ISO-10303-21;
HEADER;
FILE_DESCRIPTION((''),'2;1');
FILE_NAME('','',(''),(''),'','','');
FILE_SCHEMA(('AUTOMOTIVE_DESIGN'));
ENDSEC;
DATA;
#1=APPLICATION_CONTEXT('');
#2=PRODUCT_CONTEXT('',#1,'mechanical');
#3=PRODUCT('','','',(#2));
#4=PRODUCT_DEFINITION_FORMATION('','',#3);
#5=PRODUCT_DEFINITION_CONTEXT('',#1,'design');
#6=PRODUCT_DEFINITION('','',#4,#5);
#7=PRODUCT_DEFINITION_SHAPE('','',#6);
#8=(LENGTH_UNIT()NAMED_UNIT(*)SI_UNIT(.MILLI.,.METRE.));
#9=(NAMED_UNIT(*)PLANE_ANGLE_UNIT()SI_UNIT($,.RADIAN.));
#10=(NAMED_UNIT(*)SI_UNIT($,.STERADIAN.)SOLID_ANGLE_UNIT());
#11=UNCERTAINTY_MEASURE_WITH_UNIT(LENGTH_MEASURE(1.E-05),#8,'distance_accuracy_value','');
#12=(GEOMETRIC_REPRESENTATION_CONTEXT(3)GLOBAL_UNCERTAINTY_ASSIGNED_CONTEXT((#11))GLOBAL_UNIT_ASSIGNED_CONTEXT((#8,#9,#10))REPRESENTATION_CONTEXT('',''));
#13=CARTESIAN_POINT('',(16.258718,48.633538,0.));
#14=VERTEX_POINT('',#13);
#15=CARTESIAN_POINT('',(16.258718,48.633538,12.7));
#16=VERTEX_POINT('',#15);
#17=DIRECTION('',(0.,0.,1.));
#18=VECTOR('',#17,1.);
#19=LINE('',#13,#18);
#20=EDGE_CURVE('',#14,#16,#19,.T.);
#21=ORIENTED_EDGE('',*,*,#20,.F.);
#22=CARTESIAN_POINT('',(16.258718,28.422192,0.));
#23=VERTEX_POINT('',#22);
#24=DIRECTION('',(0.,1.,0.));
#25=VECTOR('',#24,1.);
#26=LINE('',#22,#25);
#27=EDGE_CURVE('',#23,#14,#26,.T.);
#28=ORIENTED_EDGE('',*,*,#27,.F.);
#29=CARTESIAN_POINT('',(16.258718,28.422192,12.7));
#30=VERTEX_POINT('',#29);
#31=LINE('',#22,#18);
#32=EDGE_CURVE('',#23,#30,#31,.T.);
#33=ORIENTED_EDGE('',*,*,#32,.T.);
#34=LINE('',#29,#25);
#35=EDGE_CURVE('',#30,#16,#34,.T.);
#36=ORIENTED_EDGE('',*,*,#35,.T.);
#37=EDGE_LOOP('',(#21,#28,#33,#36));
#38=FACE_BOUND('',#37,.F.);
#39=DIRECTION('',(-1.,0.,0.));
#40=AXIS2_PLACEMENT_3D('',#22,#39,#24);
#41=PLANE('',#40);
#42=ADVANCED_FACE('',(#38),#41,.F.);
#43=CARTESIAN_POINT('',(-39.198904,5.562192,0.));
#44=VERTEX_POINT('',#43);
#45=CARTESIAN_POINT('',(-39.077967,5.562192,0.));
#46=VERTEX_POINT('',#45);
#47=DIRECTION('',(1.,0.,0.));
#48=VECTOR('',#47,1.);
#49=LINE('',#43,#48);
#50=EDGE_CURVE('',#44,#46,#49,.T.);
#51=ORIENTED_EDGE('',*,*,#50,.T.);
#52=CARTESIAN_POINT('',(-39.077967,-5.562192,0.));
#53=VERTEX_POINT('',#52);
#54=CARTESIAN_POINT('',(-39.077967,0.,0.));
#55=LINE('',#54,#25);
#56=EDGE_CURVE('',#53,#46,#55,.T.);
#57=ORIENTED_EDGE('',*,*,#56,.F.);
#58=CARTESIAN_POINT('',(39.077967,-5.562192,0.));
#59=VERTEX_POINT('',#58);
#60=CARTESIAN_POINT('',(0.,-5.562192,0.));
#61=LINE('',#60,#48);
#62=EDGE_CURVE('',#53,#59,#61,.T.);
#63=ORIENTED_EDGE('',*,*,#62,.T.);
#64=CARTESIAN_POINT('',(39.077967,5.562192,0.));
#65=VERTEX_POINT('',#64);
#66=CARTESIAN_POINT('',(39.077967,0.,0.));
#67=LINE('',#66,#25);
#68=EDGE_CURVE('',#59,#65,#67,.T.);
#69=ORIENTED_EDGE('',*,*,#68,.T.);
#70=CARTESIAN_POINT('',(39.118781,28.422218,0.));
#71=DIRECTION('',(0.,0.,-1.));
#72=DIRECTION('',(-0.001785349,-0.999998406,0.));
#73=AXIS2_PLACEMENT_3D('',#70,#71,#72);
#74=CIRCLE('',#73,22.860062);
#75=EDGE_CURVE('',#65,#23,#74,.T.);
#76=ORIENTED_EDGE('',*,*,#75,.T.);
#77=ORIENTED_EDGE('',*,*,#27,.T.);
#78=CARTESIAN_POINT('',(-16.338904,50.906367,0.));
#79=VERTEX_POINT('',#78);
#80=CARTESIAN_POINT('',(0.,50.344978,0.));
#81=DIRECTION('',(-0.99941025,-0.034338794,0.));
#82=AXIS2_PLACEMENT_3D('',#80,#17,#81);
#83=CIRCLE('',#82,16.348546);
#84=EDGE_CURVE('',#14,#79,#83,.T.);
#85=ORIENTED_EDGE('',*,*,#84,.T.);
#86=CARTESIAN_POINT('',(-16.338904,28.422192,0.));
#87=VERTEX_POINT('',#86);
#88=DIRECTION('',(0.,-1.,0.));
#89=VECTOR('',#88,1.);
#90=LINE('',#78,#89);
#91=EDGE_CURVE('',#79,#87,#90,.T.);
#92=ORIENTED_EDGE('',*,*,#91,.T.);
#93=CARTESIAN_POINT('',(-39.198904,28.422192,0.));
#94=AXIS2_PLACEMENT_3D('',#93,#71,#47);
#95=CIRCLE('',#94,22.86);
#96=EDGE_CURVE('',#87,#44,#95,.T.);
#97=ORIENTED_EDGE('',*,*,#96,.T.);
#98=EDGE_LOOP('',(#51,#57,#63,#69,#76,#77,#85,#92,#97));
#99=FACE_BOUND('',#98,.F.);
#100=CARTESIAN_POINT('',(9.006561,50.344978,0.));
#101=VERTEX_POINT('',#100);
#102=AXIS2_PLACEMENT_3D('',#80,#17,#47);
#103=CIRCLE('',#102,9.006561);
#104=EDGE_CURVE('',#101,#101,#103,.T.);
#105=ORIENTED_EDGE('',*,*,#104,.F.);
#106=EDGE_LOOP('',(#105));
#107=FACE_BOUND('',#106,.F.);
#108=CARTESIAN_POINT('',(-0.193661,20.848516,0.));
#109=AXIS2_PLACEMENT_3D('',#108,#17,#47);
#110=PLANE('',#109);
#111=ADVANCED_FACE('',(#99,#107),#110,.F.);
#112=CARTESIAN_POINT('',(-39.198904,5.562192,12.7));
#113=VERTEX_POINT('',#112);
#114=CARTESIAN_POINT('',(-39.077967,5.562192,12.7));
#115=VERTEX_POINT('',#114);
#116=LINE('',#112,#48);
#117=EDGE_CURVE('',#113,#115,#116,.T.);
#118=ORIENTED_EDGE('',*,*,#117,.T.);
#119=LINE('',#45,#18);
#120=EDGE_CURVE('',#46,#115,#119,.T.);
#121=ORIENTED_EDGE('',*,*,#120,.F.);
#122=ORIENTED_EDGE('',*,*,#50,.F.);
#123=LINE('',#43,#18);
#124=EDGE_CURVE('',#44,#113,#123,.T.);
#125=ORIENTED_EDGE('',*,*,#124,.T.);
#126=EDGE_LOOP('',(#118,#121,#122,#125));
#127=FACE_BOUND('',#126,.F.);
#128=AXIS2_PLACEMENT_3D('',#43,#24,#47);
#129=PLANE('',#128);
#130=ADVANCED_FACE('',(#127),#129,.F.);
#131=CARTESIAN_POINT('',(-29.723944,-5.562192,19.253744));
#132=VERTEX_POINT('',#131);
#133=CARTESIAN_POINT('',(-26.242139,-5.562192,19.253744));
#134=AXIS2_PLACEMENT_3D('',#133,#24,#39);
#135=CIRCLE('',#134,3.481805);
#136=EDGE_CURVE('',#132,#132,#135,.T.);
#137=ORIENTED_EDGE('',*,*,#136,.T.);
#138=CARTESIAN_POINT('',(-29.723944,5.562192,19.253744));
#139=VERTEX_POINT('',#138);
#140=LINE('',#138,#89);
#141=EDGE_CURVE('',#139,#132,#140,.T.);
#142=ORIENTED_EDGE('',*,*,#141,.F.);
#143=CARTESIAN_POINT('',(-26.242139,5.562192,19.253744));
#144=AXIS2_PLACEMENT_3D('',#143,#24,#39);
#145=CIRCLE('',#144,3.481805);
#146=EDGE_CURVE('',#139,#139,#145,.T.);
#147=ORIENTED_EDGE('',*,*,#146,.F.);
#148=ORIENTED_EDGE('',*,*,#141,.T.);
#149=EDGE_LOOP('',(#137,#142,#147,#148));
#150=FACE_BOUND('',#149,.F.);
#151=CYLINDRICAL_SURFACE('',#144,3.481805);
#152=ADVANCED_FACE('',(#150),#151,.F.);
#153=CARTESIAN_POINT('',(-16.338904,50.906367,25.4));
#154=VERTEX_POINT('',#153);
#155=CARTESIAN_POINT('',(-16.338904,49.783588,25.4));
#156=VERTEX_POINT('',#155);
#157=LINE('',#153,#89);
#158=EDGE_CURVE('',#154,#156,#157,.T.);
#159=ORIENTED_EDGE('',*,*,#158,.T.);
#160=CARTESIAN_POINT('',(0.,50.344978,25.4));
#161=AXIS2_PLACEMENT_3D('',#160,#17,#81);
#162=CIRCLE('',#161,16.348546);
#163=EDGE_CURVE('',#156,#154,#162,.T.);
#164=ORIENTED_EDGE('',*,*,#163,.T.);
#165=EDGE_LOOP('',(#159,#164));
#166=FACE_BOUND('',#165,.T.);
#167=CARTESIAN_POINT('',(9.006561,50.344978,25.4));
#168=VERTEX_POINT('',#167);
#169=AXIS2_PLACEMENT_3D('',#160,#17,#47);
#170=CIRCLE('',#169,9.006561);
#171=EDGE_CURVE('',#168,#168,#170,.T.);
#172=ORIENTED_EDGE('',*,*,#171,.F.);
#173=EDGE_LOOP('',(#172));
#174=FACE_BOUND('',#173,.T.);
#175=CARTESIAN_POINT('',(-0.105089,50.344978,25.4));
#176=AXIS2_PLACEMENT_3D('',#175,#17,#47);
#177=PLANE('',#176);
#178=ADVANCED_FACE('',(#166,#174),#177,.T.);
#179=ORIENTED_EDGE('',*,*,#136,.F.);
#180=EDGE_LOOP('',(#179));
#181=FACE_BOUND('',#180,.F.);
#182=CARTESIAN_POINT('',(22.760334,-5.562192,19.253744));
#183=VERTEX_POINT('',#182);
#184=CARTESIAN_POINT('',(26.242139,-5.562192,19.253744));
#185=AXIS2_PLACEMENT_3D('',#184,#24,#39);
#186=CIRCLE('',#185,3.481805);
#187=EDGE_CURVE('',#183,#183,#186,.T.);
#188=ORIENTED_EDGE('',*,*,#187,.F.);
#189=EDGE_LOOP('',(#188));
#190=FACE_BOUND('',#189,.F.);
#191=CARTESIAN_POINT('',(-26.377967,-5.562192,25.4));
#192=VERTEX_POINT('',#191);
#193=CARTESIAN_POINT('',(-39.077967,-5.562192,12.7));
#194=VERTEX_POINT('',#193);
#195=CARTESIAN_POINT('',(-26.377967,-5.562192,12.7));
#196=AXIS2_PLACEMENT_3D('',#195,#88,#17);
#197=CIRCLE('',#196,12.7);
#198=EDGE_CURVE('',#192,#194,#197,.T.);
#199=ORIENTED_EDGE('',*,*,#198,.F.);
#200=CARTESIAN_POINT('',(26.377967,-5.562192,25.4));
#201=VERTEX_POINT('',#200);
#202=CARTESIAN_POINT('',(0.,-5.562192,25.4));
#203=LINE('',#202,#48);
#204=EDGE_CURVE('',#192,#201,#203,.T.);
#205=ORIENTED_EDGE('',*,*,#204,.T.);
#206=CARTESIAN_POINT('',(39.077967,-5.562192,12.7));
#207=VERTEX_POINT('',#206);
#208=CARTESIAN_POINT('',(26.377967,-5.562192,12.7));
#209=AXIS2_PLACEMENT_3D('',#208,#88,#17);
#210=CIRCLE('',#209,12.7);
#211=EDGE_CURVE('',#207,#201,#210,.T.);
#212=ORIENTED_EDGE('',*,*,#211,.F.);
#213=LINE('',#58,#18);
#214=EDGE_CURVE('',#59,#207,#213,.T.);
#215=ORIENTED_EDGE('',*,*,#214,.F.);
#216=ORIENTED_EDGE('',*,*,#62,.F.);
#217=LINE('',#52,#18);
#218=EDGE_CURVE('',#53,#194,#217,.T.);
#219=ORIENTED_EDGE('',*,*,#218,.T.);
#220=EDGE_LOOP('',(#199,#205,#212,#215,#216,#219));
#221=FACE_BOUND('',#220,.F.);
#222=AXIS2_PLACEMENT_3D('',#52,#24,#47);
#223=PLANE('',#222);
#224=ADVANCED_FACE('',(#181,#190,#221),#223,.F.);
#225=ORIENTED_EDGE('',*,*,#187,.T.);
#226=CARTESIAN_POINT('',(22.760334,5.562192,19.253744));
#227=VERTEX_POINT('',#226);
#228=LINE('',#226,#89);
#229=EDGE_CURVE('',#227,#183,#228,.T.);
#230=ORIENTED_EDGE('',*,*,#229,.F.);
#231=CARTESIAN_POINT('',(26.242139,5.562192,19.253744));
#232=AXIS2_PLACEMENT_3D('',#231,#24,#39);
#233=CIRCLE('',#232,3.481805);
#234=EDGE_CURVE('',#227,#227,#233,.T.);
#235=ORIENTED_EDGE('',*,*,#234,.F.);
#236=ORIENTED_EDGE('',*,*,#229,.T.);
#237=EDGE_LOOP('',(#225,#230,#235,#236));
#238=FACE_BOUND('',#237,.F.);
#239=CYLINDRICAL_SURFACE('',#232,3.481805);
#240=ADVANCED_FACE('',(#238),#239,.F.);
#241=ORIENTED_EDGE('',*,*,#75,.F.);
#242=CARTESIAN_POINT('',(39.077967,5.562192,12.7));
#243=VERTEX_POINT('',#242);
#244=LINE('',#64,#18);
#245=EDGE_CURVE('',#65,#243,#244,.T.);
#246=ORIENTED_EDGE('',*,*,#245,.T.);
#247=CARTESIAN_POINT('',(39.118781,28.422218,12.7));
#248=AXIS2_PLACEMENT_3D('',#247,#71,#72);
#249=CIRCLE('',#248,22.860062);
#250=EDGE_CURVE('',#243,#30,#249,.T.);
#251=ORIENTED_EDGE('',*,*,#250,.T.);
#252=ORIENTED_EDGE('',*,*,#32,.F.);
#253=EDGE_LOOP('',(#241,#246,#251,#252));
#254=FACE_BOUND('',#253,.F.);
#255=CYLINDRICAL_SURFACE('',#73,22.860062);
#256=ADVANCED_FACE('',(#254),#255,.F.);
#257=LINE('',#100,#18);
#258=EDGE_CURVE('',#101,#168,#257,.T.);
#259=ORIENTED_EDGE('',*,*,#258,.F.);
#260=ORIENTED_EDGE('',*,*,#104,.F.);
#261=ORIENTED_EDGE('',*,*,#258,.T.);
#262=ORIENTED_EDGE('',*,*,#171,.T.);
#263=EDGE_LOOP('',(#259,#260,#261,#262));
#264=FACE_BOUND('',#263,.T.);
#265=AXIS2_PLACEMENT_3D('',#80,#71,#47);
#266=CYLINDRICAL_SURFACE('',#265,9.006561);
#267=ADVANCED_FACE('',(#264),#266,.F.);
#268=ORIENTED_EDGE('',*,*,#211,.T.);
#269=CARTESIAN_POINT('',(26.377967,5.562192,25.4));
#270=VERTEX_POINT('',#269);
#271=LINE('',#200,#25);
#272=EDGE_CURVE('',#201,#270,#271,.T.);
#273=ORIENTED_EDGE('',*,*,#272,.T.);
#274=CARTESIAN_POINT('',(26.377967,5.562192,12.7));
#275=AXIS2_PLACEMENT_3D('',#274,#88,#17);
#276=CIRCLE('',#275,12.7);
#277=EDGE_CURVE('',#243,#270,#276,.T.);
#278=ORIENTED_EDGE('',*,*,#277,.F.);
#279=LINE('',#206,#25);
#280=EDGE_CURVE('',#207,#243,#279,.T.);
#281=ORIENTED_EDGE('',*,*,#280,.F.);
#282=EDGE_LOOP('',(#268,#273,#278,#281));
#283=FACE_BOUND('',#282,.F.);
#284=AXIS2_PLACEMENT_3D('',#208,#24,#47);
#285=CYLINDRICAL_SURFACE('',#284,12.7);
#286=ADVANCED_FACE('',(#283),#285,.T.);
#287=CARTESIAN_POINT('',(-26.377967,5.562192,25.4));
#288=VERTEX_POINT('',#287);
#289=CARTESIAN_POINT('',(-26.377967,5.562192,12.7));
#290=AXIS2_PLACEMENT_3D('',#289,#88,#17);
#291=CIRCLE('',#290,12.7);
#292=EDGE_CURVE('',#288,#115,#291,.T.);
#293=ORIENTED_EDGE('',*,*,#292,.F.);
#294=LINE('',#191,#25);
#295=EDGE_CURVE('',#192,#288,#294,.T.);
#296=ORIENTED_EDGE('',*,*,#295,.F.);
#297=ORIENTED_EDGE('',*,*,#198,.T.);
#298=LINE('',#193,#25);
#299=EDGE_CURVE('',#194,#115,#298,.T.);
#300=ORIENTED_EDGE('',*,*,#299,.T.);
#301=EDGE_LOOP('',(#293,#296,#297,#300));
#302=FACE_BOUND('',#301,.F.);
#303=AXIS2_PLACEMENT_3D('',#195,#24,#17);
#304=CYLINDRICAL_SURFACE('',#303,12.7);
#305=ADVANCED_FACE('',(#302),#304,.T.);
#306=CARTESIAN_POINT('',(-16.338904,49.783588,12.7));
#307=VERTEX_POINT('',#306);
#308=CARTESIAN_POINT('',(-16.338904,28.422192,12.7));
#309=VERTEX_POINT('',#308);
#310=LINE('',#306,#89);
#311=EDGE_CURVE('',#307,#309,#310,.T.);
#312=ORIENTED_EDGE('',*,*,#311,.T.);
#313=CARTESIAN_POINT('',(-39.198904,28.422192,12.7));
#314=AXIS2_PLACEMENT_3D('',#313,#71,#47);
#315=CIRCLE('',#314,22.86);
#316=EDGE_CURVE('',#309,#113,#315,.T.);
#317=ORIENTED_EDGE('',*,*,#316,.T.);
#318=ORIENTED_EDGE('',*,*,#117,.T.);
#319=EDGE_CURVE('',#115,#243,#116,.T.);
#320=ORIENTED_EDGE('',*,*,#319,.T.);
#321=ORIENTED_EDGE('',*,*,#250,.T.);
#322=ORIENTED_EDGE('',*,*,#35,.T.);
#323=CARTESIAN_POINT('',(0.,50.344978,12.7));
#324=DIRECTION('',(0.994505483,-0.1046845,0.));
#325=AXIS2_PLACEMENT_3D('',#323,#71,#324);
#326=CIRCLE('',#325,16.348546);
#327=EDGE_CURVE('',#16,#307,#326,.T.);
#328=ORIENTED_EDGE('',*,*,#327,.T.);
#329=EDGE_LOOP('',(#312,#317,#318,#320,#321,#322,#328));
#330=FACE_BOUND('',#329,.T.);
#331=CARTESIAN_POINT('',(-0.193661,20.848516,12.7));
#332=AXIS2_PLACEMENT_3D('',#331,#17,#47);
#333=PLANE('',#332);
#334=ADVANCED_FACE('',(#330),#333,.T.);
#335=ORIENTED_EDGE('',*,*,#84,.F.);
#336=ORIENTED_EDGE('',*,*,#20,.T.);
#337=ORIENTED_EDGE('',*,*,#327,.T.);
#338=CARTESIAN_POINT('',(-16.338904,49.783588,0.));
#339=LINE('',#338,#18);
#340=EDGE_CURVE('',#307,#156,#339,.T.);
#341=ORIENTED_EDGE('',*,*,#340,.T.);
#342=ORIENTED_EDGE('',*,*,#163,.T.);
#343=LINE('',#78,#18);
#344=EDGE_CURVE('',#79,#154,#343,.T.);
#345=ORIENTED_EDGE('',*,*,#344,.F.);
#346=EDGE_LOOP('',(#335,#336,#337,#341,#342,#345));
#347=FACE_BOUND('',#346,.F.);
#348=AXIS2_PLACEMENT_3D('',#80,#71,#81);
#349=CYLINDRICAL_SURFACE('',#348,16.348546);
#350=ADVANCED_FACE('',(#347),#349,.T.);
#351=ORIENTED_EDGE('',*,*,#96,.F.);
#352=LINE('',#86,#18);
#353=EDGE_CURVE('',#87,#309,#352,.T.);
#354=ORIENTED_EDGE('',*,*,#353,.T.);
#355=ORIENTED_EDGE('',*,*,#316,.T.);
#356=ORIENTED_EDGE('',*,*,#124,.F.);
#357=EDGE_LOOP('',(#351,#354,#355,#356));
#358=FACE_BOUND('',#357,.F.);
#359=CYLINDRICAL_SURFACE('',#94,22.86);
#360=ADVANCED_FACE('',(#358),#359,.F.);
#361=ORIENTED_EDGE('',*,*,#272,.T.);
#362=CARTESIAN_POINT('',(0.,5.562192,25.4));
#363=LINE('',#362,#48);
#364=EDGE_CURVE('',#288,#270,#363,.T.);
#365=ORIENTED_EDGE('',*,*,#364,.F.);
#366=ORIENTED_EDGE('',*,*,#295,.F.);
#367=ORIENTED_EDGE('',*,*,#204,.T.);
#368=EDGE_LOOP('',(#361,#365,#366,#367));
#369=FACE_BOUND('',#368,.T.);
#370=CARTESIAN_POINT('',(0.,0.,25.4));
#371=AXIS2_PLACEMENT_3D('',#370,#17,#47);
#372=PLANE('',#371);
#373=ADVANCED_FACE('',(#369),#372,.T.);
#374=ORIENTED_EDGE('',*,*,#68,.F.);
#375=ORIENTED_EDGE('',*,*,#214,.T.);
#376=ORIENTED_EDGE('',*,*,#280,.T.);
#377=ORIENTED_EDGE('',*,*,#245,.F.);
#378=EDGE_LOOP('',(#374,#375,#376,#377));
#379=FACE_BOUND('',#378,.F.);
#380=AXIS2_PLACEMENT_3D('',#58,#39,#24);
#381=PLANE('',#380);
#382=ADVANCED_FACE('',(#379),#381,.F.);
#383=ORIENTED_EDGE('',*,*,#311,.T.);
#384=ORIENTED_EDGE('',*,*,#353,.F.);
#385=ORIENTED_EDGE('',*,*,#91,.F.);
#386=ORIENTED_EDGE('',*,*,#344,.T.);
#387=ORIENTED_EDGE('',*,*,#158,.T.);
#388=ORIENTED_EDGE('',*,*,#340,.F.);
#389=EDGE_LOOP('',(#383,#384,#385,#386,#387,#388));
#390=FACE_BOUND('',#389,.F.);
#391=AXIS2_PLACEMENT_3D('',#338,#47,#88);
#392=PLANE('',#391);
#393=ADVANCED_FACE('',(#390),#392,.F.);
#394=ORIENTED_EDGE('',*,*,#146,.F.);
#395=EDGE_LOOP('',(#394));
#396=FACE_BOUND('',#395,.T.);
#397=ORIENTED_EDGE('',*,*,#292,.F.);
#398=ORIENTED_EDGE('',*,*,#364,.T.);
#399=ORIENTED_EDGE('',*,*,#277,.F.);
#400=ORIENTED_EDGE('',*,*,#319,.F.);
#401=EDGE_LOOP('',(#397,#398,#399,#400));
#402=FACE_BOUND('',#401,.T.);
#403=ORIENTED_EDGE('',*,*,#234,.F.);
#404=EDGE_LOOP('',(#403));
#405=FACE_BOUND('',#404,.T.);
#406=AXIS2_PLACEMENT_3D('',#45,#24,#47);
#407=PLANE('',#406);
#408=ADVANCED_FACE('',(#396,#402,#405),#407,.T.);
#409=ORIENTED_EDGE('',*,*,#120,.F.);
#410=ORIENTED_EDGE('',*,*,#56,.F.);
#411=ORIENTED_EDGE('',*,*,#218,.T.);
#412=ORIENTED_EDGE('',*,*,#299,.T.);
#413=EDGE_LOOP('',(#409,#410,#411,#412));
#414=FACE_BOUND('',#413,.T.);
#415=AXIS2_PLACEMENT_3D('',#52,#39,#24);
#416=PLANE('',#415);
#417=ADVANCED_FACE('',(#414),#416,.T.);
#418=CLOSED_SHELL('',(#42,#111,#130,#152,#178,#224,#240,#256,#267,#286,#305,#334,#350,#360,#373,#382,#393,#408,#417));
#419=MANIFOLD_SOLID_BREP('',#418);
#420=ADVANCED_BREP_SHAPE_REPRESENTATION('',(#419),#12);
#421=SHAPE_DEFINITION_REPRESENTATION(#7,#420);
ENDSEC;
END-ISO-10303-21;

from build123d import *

# Parameters (mm, degrees)
F0_W     = 78.1559348106
F0_H     = 11.1243845895
F1_DEPTH = 25.4
F0_R     = 9.006561322
F2_DEPTH = 12.7
F3_R     = 12.7
F4_R     = 3.4818048238
F5_DEPTH = 11.1253845895


# Not quite as in the source:
# - ends of sketch curves that miss each other by under 0.0002 mm in the source are joined


with BuildPart() as f1:
    # F0 (on Top) → F1 (new body)
    with BuildSketch(Plane.XY):
        Rectangle(F0_W, F0_H)
    extrude(amount=F1_DEPTH)



with BuildPart() as f1b:
    # F0 (on Top) → F1, piece 2 (new body)
    with BuildSketch(Plane.XY):
        with BuildLine():
            Line((-16.3389042508, 50.9063668795), (-16.3389042508, 49.7835881762))
            ThreePointArc((-16.3389042508, 49.7835881762), (-0.5764210141, 34.0065966737), (16.2587184459, 48.6335381866))
            ThreePointArc((16.2587184459, 48.6335381866), (1.1371213689, 66.6539292144), (-16.3389042508, 50.9063668795))
        make_face()
        with Locations((0, 50.3449775279)):
            Circle(F0_R, mode=Mode.SUBTRACT)
    extrude(amount=F1_DEPTH)


with BuildPart() as f1_1:
    add(f1.part)

    add(f1b.part)  # F2 merges F1b
    # F0 (on Top) → F2 (join)
    with BuildSketch(Plane.XY):
        with BuildLine():
            ThreePointArc((-16.3389042508, 28.4221922947), (-23.0344432329, 12.2577312768), (-39.1989042508, 5.5621922947))
            Line((-39.1989042508, 5.5621922947), (-39.0779674053, 5.5621922947))
            Line((-39.0779674053, 5.5621922947), (39.0779674053, 5.5621922947))
            ThreePointArc((39.0779674053, 5.5621922947), (22.9398561975, 12.2721453491), (16.2587184459, 28.4221922947))
            Line((16.2587184459, 28.4221922947), (16.2587184459, 48.6335381866))
            ThreePointArc((16.2587184459, 48.6335381866), (-0.5764210141, 34.0065966737), (-16.3389042508, 49.7835881762))
            Line((-16.3389042508, 49.7835881762), (-16.3389042508, 28.4221922947))
        make_face()
    extrude(amount=F2_DEPTH)

    # F3
    f3_edges = [f1_1.edges().sort_by_distance(p)[0] for p in [
        (39.077967, 0, 25.4),
        (-39.077967, 0, 25.4),
    ]]
    fillet(f3_edges, radius=F3_R)

    # F4 (on face) → F5 (cut, through all)
    with BuildSketch(Plane(origin=(0, 5.5621922947, 0), x_dir=(-1, 0, 0), z_dir=(0, 1, 0))):
        with Locations((-26.2421388179, 19.2537438124)):
            Circle(F4_R)
        with Locations((26.2421388179, 19.2537438124)):
            Circle(F4_R)
    extrude(amount=-F5_DEPTH, mode=Mode.SUBTRACT)


solid = f1_1.part
